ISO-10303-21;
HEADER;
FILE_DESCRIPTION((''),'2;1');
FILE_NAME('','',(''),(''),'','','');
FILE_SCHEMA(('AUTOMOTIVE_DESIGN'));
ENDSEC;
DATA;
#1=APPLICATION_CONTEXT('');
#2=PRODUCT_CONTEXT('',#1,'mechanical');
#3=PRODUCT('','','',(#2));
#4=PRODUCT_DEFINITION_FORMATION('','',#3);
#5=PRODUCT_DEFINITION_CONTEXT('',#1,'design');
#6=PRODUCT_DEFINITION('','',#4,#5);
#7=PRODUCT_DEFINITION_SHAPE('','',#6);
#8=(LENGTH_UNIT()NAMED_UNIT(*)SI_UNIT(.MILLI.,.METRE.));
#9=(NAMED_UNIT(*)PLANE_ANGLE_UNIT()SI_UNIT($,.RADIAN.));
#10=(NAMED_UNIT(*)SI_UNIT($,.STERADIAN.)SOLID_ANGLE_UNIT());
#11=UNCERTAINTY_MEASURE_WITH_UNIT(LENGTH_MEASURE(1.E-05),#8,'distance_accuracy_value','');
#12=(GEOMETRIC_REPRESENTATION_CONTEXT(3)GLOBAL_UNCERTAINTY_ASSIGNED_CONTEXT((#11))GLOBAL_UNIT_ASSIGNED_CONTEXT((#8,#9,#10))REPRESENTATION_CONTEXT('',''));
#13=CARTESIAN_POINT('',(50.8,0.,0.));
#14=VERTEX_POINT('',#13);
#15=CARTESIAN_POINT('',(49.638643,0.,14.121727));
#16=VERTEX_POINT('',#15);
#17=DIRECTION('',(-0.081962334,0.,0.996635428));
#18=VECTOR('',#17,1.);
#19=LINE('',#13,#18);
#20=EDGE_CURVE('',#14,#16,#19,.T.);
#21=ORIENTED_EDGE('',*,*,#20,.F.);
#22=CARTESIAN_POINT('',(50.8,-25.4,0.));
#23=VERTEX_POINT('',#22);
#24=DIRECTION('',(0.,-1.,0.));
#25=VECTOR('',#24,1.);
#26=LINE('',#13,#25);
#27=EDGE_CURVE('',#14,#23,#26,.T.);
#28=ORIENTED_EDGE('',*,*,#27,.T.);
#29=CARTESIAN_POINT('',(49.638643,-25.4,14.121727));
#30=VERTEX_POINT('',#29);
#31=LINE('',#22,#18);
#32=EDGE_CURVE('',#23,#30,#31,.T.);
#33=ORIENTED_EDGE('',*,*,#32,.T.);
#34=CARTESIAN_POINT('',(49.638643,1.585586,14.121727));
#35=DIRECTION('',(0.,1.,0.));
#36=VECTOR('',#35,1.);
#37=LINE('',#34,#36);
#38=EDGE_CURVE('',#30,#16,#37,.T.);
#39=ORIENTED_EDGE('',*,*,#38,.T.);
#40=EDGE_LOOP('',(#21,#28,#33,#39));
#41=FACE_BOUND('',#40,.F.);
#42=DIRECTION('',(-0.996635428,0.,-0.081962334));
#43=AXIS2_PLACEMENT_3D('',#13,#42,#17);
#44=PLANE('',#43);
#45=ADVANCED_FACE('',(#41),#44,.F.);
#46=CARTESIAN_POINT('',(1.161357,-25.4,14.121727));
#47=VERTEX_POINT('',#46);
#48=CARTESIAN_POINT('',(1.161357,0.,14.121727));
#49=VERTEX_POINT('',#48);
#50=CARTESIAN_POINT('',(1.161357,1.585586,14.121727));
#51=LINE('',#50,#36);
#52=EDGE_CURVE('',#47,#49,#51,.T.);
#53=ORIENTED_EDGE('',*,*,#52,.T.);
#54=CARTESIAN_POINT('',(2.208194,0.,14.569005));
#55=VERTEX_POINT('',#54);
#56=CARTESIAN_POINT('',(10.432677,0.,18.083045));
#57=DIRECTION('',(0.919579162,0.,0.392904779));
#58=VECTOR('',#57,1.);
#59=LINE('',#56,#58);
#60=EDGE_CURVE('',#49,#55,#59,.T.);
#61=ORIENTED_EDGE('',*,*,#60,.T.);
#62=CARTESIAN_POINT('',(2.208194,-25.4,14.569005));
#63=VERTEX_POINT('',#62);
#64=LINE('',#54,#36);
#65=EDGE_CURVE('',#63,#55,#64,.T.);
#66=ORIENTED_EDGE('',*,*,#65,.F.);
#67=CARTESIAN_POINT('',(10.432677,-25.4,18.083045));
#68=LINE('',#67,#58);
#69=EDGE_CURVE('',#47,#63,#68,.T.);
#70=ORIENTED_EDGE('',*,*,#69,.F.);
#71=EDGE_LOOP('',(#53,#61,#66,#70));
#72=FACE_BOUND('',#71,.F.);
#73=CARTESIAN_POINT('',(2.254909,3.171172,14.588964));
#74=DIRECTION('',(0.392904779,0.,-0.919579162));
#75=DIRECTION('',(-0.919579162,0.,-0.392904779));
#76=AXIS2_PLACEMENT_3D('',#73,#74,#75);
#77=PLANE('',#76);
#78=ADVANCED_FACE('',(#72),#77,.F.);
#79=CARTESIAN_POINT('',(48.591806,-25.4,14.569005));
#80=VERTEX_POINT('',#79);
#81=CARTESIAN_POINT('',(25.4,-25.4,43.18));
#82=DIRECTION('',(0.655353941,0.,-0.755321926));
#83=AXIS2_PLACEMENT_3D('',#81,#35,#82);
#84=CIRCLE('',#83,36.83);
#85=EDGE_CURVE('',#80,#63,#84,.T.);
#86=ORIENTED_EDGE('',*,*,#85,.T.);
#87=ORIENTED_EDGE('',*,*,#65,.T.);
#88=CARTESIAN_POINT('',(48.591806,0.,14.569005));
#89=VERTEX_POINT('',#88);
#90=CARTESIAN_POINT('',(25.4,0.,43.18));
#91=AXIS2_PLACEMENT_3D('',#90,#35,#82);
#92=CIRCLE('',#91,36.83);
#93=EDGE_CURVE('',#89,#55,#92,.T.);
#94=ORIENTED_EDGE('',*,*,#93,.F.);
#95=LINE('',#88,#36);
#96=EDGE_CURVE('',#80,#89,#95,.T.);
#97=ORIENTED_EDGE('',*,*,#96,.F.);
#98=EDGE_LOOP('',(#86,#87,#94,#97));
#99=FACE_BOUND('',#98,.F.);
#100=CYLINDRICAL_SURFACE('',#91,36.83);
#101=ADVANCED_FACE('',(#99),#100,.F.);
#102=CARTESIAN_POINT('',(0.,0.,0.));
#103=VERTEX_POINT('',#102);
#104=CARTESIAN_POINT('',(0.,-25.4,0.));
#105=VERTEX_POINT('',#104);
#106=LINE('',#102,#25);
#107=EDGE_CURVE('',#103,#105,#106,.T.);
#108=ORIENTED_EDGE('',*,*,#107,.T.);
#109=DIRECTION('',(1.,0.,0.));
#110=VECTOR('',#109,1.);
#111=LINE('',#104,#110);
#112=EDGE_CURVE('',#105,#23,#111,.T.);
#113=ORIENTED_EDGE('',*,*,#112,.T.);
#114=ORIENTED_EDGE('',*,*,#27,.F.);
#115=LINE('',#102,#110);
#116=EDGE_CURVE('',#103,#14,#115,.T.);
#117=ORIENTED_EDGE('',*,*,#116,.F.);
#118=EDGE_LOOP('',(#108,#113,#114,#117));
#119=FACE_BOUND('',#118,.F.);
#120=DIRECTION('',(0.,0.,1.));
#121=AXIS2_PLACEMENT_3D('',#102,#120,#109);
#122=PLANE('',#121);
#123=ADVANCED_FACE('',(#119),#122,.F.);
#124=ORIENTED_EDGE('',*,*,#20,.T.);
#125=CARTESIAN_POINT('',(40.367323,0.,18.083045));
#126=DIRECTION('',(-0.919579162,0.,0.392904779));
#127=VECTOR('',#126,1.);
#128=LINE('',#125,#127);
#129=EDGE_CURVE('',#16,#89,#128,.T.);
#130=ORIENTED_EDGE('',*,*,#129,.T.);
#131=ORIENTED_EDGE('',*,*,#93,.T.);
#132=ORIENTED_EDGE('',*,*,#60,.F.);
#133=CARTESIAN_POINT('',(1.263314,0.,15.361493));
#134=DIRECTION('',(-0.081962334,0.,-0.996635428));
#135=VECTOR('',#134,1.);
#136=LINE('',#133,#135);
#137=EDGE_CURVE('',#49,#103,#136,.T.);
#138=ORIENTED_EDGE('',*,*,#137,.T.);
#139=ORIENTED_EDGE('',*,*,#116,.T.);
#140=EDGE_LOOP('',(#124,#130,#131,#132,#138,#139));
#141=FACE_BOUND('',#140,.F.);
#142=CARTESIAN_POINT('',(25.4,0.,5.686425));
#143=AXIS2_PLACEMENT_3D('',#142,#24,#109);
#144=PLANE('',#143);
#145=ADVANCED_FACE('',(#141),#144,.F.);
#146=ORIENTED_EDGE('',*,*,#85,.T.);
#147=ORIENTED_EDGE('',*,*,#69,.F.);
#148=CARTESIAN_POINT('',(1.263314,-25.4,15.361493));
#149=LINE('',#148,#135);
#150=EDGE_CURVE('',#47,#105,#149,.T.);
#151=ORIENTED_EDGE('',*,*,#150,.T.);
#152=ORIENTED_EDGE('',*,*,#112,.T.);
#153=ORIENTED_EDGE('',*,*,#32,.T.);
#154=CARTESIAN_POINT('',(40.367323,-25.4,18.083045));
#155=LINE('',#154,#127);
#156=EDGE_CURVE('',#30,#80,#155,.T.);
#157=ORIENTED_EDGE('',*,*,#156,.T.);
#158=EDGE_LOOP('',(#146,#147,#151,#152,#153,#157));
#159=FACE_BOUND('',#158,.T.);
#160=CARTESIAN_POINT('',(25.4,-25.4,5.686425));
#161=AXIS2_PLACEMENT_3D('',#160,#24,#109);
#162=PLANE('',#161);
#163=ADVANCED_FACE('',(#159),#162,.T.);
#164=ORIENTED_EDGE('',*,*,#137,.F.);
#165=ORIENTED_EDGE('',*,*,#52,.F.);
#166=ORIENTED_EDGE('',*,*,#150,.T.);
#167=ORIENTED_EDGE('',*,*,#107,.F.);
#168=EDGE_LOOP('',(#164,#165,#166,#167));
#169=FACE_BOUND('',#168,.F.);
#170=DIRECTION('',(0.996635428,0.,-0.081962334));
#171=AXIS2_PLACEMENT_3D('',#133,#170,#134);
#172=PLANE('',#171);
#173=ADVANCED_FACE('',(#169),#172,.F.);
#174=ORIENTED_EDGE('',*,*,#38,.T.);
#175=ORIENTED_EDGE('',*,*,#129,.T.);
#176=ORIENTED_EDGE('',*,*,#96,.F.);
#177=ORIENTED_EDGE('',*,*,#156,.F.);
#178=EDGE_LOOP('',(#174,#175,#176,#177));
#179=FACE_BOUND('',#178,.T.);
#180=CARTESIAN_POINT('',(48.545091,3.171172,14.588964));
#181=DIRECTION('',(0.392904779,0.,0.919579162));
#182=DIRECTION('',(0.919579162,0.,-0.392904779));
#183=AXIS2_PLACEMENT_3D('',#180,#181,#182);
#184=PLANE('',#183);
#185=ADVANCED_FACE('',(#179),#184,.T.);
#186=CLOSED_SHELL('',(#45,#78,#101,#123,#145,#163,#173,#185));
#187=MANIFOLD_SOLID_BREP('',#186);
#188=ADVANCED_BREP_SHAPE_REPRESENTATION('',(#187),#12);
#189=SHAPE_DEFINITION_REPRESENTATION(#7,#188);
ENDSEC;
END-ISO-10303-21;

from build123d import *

# Parameters (mm, degrees)
F1_DEPTH    = 25.4
F2_T1_DEPTH = 31.742344746


# Not quite as in the source:
# - a fillet or chamfer that OpenCascade refuses, or shapes differently, is made with other operations: its cross-section is extruded or revolved along the edge and cut away or added


with BuildPart() as f1:
    # F0 (on Front) → F1 (new body)
    with BuildSketch(Plane.XZ):
        with BuildLine():
            Line((1.2633143634, 15.3614934534), (0, 0))
            Line((0, 0), (50.8, 0))
            Line((50.8, 0), (49.5366856366, 15.3614934534))
            ThreePointArc((49.5366856366, 15.3614934534), (25.4, 6.35), (1.2633143634, 15.3614934534))
        make_face()
    extrude(amount=F1_DEPTH)

    # F2: chamfer of 1.27 on 2 edges, made by hand

    # F2_s2 → F2_t1 (cut)
    with BuildSketch(Plane.XZ.offset(-3.171172373)):
        with BuildLine():
            Line((2.2549090841, 14.5889641953), (1.1146425309, 14.1017672287))
            Line((1.1146425309, 14.1017672287), (1.089327991, 14.103849072))
            ThreePointArc((1.089327991, 14.103849072), (1.1860490936, 14.7318712483), (1.2379998236, 15.3635752967))
            Line((1.2379998236, 15.3635752967), (1.2799603535, 15.3806786304))
            ThreePointArc((1.2799603535, 15.3806786304), (1.7575594643, 14.9733769005), (2.2709034327, 14.6086959162))
            Line((2.2709034327, 14.6086959162), (2.2549090841, 14.5889641953))
        make_face()
        with BuildLine():
            Line((48.5450909159, 14.5889641953), (49.6853574691, 14.1017672287))
            Line((49.6853574691, 14.1017672287), (49.710672009, 14.103849072))
            ThreePointArc((49.710672009, 14.103849072), (49.6139509064, 14.7318712483), (49.5620001764, 15.3635752967))
            Line((49.5620001764, 15.3635752967), (49.5200396465, 15.3806786304))
            ThreePointArc((49.5200396465, 15.3806786304), (49.0424405357, 14.9733769005), (48.5290965673, 14.6086959162))
            Line((48.5290965673, 14.6086959162), (48.5450909159, 14.5889641953))
        make_face()
    extrude(amount=F2_T1_DEPTH, mode=Mode.SUBTRACT)


solid = f1.part
